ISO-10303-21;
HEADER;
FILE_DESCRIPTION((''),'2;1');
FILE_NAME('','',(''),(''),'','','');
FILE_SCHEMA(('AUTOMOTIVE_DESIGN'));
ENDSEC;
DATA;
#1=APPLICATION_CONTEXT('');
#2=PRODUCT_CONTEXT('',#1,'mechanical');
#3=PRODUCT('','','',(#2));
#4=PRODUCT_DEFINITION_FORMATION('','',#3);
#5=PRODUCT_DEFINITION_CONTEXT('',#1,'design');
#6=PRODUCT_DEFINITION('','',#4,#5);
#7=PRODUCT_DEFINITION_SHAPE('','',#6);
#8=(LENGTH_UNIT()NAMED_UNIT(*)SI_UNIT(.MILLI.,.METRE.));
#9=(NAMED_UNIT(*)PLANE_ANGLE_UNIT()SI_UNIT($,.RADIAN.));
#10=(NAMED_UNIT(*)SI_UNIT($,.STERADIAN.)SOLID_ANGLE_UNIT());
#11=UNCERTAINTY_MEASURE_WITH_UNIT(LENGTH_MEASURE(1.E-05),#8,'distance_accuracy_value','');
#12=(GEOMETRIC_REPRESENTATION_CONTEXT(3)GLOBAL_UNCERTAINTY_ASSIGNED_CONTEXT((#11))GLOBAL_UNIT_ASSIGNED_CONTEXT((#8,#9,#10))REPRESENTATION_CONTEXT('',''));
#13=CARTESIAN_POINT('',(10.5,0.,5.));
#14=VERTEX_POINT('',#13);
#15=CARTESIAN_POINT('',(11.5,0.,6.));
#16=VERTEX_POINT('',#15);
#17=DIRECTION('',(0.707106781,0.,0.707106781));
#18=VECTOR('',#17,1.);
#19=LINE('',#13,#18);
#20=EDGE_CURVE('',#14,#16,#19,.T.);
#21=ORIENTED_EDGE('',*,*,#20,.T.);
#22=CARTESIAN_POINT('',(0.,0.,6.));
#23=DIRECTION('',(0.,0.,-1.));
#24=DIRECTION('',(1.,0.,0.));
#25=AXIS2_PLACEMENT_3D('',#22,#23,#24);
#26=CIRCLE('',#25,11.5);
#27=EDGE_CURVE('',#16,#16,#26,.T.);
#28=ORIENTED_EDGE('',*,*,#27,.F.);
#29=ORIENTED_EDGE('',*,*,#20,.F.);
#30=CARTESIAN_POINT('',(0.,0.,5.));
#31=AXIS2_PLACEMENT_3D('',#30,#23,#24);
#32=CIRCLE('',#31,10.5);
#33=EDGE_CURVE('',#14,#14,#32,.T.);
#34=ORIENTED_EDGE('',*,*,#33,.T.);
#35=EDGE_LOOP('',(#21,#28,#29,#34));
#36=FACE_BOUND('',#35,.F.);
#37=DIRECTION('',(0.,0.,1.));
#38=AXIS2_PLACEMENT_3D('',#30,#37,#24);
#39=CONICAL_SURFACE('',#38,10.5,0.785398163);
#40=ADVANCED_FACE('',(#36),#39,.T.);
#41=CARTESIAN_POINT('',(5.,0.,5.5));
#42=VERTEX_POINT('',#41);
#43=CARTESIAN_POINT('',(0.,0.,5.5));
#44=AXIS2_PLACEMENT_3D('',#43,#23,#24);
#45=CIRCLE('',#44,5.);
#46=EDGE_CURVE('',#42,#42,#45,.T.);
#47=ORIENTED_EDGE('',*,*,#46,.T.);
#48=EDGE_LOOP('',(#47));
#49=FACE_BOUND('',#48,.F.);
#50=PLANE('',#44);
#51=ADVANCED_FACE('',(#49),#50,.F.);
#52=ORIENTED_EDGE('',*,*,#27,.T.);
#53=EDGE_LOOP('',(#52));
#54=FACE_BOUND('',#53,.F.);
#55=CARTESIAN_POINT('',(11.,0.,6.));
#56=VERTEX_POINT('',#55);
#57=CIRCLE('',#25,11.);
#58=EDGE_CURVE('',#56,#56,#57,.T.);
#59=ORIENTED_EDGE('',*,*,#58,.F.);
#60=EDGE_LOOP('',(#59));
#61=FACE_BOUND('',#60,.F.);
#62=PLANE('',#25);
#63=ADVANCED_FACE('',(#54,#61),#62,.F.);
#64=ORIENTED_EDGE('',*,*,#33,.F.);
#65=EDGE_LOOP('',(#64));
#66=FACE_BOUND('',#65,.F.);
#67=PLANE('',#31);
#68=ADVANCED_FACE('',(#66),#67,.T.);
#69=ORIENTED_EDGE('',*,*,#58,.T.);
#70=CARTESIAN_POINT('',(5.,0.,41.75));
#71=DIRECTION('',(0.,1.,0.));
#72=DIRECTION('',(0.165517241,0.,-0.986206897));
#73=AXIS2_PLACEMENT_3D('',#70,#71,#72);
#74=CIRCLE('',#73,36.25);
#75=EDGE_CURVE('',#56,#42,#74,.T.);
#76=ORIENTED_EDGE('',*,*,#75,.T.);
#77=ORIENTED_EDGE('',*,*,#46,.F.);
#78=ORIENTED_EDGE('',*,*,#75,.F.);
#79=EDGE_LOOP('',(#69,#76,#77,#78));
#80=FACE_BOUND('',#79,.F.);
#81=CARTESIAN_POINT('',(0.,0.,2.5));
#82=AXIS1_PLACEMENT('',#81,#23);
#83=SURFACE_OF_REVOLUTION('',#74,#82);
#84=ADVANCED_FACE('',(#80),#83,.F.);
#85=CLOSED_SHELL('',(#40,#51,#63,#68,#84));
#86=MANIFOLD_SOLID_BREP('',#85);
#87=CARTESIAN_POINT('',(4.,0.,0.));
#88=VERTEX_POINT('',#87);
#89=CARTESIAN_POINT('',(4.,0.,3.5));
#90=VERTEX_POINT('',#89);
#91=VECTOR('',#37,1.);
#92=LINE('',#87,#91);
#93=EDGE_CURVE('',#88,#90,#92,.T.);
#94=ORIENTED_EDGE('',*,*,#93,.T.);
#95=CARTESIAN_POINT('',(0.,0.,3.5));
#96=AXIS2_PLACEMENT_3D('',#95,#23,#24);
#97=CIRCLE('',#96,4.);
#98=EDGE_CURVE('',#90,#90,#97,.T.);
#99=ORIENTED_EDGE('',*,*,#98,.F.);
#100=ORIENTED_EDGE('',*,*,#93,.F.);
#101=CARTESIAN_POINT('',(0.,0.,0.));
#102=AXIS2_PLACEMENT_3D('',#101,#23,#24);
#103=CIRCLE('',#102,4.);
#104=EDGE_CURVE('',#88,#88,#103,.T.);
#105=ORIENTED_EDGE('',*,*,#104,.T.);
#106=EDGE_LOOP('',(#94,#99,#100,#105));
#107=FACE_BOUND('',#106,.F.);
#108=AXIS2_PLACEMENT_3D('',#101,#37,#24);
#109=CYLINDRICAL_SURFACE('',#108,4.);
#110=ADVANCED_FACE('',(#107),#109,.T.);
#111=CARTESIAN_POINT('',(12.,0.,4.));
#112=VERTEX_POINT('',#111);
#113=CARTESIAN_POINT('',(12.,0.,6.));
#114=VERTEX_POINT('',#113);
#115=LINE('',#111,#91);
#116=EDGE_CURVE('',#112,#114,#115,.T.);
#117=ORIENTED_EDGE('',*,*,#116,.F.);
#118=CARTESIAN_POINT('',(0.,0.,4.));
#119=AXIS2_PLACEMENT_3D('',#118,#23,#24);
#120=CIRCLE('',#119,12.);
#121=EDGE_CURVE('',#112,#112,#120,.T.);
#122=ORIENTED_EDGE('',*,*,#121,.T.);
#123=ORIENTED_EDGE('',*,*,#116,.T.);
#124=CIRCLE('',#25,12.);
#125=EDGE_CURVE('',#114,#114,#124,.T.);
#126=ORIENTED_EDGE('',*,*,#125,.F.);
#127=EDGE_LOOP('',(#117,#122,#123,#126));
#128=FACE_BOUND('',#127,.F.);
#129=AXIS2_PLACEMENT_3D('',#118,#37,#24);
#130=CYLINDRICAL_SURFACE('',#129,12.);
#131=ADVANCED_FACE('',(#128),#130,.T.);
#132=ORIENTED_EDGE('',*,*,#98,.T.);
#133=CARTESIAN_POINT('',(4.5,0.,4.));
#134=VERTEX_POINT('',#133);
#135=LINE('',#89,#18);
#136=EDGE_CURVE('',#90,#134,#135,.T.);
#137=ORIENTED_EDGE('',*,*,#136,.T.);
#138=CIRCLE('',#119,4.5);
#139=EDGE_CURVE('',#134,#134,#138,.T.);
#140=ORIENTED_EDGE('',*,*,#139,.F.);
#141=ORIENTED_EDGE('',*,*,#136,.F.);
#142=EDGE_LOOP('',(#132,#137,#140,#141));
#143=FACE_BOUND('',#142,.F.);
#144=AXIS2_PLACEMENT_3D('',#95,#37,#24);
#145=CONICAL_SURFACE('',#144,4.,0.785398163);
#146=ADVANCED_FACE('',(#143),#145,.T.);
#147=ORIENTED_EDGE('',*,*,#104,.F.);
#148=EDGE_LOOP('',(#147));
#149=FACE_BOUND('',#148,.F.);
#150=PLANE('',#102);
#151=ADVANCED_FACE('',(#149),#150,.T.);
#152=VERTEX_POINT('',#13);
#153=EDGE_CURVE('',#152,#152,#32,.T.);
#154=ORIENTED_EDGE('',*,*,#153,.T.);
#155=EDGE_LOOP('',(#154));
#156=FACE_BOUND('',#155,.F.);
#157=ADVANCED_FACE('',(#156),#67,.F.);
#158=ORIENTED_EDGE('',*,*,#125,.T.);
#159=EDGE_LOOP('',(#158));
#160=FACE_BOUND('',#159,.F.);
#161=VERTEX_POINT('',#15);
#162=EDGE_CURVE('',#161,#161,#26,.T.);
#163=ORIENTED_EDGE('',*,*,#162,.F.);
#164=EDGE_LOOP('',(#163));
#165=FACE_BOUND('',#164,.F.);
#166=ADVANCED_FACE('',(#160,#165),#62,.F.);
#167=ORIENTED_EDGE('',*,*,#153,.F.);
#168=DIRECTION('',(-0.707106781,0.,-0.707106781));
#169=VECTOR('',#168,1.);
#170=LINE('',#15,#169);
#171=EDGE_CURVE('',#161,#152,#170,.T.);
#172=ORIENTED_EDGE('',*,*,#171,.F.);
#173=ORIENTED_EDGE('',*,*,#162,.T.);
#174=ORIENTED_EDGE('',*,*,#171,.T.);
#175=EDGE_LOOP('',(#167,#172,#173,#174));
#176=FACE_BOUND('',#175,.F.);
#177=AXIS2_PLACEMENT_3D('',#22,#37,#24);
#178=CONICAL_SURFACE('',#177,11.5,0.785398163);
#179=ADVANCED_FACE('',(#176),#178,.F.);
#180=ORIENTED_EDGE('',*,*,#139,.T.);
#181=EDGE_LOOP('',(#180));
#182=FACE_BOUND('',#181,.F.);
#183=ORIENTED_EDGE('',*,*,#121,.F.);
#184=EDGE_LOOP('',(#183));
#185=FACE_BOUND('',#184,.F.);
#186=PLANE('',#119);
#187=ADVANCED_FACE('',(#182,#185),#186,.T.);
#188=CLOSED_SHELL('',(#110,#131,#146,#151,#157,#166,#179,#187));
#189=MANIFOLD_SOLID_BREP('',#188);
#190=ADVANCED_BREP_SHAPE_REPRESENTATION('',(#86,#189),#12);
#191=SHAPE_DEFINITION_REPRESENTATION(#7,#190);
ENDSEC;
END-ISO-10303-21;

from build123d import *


# Not quite as in the source:
# - a feature of the source that left no trace in its solid (it failed there, or was rolled back) is left out
# - a feature names something its author has since deleted; it is built from what else it names


with BuildPart() as f1:
    # F0 (on Front) → F1 (revolve)
    with BuildSketch(Plane.XZ):
        Polygon((0, 5), (0, 0), (4, 0), (4, 3.5), (4.5, 4), (12, 4), (12, 6), (11.5, 6), (10.5, 5), align=None)
    revolve(axis=Axis((0, 0, 2.5), (0, 0, -1)))


with BuildPart() as f2:
    # F0 (on Front) → F2 (revolve)
    with BuildSketch(Plane.XZ):
        with BuildLine():
            Line((0, 5.5), (0, 5))
            Line((0, 5), (10.5, 5))
            Line((10.5, 5), (11.5, 6))
            Line((11.5, 6), (11, 6))
            ThreePointArc((11, 6), (8.0103986447, 5.6252162636), (5, 5.5))
            Line((5, 5.5), (0, 5.5))
        make_face()
    revolve(axis=Axis((0, 0, 2.5), (0, 0, -1)))


solid = Compound([f1.part, f2.part])
